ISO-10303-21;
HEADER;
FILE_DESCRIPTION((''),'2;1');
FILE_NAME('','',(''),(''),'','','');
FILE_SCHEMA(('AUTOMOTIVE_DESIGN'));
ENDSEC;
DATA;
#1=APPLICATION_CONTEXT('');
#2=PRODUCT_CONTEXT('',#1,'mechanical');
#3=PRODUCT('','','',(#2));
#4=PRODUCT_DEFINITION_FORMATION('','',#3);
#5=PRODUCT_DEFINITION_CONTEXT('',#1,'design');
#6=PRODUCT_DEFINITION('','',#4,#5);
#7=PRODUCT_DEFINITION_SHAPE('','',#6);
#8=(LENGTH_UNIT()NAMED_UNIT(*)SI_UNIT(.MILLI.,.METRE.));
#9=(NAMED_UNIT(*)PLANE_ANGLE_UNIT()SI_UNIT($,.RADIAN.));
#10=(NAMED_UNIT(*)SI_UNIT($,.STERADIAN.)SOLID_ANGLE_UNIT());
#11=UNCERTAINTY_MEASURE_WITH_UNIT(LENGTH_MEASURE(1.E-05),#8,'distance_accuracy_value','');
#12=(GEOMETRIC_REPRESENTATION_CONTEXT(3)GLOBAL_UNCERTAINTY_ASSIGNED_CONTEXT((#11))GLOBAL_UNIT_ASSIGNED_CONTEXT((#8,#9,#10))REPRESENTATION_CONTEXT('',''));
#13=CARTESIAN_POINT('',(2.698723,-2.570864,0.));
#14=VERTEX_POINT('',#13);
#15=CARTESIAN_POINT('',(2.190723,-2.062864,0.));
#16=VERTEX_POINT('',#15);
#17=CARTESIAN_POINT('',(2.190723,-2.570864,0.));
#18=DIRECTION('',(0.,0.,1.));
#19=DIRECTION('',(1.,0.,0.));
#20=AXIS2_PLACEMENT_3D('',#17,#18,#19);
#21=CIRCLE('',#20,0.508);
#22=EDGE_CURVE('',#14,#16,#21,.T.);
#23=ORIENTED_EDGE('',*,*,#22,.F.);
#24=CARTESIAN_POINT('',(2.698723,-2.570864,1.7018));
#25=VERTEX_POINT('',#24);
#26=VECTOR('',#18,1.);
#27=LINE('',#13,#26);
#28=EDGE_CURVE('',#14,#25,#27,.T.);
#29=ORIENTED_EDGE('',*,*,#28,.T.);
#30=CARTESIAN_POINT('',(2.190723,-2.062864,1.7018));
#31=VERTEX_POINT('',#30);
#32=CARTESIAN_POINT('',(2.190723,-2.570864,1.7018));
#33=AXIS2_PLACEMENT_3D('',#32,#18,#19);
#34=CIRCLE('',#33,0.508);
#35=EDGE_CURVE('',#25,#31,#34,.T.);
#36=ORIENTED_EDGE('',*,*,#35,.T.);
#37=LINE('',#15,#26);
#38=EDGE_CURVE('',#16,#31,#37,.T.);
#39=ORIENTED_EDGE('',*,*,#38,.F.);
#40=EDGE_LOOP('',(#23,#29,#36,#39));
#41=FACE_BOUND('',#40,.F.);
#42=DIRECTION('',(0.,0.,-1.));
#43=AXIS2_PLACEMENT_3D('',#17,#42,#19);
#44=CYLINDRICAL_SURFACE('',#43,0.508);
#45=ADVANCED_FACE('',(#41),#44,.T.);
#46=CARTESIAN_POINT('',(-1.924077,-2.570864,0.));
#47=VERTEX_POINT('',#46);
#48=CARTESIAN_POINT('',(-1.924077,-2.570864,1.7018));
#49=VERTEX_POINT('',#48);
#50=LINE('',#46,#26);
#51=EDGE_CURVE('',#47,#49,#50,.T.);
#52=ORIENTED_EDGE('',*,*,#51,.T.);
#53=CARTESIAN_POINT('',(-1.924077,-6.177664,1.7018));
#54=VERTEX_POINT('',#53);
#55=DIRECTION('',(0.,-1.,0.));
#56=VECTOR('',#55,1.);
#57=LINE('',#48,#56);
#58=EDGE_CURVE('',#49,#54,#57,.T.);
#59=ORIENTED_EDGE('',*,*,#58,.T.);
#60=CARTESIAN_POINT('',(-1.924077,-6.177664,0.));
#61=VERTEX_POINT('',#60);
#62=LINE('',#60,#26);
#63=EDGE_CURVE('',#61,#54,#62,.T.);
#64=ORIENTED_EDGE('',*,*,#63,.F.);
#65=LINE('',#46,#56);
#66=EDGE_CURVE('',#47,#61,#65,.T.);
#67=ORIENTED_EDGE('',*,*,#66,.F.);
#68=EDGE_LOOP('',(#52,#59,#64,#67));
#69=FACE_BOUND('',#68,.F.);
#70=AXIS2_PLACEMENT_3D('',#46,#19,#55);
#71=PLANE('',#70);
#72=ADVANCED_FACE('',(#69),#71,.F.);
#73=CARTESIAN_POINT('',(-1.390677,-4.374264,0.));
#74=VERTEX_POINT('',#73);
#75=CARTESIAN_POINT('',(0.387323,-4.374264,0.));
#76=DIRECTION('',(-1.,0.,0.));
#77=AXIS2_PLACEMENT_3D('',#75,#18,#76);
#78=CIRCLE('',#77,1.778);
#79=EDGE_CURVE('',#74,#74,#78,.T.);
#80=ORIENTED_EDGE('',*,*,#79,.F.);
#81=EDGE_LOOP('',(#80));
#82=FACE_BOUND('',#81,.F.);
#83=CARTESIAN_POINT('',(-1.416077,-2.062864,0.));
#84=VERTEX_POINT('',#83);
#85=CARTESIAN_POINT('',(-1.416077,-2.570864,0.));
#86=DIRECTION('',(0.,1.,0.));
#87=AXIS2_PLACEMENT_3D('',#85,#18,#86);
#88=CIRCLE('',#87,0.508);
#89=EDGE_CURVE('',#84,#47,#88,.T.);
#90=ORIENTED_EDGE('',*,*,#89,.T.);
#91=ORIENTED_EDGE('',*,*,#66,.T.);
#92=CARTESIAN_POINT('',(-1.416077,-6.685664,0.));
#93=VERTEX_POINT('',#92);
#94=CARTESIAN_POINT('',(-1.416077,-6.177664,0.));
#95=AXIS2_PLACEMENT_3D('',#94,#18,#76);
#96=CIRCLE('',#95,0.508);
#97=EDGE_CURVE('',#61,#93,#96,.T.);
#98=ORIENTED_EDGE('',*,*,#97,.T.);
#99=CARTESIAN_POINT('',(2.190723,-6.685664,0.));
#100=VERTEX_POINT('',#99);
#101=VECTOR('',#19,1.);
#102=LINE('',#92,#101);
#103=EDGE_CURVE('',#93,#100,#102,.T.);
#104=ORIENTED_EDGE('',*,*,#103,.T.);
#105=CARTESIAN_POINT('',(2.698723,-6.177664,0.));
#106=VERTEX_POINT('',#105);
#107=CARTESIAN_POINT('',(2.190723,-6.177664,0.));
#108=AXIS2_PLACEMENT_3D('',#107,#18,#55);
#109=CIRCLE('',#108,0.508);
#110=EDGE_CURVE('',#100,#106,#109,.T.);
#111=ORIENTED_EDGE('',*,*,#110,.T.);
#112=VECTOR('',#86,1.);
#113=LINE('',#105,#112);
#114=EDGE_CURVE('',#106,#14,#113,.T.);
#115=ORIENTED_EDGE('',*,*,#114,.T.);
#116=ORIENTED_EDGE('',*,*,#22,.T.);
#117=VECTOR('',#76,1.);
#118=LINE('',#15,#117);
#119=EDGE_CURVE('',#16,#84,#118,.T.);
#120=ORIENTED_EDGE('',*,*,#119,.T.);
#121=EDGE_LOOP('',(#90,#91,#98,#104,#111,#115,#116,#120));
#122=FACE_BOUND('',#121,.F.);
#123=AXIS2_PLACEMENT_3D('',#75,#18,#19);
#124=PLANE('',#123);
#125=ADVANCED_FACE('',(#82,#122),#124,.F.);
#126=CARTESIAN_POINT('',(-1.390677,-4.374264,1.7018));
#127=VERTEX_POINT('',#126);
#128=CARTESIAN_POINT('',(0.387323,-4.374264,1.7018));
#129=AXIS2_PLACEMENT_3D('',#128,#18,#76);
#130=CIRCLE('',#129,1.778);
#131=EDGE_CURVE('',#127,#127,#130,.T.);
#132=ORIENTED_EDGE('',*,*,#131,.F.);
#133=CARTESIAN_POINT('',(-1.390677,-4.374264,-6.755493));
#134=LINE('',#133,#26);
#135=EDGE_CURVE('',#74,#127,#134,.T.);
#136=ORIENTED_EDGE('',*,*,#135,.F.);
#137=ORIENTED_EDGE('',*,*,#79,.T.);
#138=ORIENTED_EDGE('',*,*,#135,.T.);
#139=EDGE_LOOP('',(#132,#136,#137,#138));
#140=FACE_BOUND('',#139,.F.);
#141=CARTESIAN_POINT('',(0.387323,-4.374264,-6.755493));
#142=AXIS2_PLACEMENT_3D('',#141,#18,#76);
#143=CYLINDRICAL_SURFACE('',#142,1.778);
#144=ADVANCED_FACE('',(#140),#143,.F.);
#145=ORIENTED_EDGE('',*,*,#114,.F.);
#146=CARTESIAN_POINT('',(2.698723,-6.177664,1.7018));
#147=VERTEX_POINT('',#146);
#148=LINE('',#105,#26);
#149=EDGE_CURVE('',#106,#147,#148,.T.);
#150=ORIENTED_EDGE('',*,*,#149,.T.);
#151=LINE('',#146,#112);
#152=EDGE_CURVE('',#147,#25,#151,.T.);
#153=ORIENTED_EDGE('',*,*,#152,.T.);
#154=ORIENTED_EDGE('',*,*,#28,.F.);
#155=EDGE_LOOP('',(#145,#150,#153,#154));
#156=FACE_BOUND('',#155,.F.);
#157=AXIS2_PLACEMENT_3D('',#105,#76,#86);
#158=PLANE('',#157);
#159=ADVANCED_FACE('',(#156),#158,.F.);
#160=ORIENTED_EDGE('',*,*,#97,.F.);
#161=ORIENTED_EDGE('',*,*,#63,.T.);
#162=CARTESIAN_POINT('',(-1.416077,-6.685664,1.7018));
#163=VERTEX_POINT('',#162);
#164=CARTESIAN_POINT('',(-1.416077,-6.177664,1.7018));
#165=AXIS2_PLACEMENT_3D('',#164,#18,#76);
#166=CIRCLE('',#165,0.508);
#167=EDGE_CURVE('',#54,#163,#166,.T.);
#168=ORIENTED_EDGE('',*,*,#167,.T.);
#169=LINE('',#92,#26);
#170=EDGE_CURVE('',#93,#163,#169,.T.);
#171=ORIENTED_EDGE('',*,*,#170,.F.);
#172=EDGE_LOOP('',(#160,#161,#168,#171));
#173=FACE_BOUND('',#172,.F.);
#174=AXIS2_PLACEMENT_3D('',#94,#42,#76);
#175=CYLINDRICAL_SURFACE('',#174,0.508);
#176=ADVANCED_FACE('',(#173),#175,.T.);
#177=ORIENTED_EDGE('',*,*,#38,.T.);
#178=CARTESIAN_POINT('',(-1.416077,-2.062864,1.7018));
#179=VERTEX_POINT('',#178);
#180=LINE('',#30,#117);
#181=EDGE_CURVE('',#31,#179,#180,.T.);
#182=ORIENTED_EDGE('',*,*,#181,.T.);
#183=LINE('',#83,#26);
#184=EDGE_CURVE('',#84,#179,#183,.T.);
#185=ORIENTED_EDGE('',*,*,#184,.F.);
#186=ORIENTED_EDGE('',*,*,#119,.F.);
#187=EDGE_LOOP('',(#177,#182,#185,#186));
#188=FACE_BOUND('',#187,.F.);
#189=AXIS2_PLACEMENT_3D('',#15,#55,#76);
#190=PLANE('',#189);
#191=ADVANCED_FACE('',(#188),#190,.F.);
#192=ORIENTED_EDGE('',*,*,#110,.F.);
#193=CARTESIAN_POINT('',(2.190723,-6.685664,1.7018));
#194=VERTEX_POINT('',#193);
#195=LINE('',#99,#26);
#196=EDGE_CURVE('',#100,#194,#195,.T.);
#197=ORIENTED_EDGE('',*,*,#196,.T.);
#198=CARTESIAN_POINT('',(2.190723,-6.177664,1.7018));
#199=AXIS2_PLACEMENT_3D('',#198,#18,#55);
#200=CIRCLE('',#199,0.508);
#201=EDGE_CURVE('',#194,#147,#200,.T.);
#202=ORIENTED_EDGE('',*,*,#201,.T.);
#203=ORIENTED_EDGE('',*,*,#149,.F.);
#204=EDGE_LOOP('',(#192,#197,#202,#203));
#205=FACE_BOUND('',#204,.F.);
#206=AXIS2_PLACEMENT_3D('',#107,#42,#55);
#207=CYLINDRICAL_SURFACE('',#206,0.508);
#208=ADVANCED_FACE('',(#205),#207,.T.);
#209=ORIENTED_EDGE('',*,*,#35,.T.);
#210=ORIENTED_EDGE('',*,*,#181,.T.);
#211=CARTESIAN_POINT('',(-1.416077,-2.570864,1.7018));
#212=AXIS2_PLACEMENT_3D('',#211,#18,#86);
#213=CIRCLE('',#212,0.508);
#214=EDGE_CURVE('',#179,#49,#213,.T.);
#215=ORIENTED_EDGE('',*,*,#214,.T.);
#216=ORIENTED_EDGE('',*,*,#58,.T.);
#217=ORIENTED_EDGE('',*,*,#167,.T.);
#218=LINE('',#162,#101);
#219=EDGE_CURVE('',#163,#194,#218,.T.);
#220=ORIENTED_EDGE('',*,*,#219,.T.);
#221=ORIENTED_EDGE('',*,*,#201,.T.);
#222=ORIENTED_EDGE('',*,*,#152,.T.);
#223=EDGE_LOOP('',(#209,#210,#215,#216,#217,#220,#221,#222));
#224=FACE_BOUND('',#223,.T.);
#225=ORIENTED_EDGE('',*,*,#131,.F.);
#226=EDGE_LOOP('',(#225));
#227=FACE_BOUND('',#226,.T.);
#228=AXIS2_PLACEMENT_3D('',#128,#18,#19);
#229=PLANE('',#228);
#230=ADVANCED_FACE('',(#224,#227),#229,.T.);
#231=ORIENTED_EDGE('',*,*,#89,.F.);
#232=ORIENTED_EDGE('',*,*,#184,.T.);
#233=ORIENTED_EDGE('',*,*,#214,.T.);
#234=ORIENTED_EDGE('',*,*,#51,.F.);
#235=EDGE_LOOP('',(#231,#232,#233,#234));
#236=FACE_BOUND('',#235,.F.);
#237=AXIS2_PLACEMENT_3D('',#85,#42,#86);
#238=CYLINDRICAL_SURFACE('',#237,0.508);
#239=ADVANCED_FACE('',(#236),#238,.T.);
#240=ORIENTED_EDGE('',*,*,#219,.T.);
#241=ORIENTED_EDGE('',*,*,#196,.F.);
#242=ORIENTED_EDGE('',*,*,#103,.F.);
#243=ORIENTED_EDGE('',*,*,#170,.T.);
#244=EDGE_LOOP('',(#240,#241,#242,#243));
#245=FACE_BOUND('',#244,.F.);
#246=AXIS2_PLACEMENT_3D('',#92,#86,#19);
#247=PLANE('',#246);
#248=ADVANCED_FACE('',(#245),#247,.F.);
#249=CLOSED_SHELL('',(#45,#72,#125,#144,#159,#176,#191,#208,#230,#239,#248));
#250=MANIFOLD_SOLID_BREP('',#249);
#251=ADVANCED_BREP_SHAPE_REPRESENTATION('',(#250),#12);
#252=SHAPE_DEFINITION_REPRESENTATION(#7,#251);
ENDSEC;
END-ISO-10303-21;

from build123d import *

# Parameters (mm, degrees)
F1_DEPTH = 1.7018
F3_D     = 3.556


# Not quite as in the source:
# - a feature names something its author has since deleted; it is built from what else it names


with BuildPart() as f1:
    # F0 (on Top) → F1 (new body)
    with BuildSketch(Plane.XY):
        with BuildLine():
            Line((2.1907232318, -2.0628636251), (-1.4160767682, -2.0628636251))
            ThreePointArc((-1.4160767682, -2.0628636251), (-1.775287013, -2.2116533802), (-1.9240767682, -2.5708636251))
            Line((-1.9240767682, -2.5708636251), (-1.9240767682, -6.1776636251))
            ThreePointArc((-1.9240767682, -6.1776636251), (-1.775287013, -6.5368738699), (-1.4160767682, -6.6856636251))
            Line((-1.4160767682, -6.6856636251), (2.1907232318, -6.6856636251))
            ThreePointArc((2.1907232318, -6.6856636251), (2.5499334767, -6.5368738699), (2.6987232318, -6.1776636251))
            Line((2.6987232318, -6.1776636251), (2.6987232318, -2.5708636251))
            ThreePointArc((2.6987232318, -2.5708636251), (2.5499334767, -2.2116533802), (2.1907232318, -2.0628636251))
        make_face()
    extrude(amount=F1_DEPTH)

    # F3 (through all)
    with Locations(Plane(origin=(0, 0, 0), x_dir=(1, 0, 0), z_dir=(0, 0, -1))):
        with Locations((0.3873232318, 4.3742636251)):
            Hole(F3_D / 2)


solid = f1.part
